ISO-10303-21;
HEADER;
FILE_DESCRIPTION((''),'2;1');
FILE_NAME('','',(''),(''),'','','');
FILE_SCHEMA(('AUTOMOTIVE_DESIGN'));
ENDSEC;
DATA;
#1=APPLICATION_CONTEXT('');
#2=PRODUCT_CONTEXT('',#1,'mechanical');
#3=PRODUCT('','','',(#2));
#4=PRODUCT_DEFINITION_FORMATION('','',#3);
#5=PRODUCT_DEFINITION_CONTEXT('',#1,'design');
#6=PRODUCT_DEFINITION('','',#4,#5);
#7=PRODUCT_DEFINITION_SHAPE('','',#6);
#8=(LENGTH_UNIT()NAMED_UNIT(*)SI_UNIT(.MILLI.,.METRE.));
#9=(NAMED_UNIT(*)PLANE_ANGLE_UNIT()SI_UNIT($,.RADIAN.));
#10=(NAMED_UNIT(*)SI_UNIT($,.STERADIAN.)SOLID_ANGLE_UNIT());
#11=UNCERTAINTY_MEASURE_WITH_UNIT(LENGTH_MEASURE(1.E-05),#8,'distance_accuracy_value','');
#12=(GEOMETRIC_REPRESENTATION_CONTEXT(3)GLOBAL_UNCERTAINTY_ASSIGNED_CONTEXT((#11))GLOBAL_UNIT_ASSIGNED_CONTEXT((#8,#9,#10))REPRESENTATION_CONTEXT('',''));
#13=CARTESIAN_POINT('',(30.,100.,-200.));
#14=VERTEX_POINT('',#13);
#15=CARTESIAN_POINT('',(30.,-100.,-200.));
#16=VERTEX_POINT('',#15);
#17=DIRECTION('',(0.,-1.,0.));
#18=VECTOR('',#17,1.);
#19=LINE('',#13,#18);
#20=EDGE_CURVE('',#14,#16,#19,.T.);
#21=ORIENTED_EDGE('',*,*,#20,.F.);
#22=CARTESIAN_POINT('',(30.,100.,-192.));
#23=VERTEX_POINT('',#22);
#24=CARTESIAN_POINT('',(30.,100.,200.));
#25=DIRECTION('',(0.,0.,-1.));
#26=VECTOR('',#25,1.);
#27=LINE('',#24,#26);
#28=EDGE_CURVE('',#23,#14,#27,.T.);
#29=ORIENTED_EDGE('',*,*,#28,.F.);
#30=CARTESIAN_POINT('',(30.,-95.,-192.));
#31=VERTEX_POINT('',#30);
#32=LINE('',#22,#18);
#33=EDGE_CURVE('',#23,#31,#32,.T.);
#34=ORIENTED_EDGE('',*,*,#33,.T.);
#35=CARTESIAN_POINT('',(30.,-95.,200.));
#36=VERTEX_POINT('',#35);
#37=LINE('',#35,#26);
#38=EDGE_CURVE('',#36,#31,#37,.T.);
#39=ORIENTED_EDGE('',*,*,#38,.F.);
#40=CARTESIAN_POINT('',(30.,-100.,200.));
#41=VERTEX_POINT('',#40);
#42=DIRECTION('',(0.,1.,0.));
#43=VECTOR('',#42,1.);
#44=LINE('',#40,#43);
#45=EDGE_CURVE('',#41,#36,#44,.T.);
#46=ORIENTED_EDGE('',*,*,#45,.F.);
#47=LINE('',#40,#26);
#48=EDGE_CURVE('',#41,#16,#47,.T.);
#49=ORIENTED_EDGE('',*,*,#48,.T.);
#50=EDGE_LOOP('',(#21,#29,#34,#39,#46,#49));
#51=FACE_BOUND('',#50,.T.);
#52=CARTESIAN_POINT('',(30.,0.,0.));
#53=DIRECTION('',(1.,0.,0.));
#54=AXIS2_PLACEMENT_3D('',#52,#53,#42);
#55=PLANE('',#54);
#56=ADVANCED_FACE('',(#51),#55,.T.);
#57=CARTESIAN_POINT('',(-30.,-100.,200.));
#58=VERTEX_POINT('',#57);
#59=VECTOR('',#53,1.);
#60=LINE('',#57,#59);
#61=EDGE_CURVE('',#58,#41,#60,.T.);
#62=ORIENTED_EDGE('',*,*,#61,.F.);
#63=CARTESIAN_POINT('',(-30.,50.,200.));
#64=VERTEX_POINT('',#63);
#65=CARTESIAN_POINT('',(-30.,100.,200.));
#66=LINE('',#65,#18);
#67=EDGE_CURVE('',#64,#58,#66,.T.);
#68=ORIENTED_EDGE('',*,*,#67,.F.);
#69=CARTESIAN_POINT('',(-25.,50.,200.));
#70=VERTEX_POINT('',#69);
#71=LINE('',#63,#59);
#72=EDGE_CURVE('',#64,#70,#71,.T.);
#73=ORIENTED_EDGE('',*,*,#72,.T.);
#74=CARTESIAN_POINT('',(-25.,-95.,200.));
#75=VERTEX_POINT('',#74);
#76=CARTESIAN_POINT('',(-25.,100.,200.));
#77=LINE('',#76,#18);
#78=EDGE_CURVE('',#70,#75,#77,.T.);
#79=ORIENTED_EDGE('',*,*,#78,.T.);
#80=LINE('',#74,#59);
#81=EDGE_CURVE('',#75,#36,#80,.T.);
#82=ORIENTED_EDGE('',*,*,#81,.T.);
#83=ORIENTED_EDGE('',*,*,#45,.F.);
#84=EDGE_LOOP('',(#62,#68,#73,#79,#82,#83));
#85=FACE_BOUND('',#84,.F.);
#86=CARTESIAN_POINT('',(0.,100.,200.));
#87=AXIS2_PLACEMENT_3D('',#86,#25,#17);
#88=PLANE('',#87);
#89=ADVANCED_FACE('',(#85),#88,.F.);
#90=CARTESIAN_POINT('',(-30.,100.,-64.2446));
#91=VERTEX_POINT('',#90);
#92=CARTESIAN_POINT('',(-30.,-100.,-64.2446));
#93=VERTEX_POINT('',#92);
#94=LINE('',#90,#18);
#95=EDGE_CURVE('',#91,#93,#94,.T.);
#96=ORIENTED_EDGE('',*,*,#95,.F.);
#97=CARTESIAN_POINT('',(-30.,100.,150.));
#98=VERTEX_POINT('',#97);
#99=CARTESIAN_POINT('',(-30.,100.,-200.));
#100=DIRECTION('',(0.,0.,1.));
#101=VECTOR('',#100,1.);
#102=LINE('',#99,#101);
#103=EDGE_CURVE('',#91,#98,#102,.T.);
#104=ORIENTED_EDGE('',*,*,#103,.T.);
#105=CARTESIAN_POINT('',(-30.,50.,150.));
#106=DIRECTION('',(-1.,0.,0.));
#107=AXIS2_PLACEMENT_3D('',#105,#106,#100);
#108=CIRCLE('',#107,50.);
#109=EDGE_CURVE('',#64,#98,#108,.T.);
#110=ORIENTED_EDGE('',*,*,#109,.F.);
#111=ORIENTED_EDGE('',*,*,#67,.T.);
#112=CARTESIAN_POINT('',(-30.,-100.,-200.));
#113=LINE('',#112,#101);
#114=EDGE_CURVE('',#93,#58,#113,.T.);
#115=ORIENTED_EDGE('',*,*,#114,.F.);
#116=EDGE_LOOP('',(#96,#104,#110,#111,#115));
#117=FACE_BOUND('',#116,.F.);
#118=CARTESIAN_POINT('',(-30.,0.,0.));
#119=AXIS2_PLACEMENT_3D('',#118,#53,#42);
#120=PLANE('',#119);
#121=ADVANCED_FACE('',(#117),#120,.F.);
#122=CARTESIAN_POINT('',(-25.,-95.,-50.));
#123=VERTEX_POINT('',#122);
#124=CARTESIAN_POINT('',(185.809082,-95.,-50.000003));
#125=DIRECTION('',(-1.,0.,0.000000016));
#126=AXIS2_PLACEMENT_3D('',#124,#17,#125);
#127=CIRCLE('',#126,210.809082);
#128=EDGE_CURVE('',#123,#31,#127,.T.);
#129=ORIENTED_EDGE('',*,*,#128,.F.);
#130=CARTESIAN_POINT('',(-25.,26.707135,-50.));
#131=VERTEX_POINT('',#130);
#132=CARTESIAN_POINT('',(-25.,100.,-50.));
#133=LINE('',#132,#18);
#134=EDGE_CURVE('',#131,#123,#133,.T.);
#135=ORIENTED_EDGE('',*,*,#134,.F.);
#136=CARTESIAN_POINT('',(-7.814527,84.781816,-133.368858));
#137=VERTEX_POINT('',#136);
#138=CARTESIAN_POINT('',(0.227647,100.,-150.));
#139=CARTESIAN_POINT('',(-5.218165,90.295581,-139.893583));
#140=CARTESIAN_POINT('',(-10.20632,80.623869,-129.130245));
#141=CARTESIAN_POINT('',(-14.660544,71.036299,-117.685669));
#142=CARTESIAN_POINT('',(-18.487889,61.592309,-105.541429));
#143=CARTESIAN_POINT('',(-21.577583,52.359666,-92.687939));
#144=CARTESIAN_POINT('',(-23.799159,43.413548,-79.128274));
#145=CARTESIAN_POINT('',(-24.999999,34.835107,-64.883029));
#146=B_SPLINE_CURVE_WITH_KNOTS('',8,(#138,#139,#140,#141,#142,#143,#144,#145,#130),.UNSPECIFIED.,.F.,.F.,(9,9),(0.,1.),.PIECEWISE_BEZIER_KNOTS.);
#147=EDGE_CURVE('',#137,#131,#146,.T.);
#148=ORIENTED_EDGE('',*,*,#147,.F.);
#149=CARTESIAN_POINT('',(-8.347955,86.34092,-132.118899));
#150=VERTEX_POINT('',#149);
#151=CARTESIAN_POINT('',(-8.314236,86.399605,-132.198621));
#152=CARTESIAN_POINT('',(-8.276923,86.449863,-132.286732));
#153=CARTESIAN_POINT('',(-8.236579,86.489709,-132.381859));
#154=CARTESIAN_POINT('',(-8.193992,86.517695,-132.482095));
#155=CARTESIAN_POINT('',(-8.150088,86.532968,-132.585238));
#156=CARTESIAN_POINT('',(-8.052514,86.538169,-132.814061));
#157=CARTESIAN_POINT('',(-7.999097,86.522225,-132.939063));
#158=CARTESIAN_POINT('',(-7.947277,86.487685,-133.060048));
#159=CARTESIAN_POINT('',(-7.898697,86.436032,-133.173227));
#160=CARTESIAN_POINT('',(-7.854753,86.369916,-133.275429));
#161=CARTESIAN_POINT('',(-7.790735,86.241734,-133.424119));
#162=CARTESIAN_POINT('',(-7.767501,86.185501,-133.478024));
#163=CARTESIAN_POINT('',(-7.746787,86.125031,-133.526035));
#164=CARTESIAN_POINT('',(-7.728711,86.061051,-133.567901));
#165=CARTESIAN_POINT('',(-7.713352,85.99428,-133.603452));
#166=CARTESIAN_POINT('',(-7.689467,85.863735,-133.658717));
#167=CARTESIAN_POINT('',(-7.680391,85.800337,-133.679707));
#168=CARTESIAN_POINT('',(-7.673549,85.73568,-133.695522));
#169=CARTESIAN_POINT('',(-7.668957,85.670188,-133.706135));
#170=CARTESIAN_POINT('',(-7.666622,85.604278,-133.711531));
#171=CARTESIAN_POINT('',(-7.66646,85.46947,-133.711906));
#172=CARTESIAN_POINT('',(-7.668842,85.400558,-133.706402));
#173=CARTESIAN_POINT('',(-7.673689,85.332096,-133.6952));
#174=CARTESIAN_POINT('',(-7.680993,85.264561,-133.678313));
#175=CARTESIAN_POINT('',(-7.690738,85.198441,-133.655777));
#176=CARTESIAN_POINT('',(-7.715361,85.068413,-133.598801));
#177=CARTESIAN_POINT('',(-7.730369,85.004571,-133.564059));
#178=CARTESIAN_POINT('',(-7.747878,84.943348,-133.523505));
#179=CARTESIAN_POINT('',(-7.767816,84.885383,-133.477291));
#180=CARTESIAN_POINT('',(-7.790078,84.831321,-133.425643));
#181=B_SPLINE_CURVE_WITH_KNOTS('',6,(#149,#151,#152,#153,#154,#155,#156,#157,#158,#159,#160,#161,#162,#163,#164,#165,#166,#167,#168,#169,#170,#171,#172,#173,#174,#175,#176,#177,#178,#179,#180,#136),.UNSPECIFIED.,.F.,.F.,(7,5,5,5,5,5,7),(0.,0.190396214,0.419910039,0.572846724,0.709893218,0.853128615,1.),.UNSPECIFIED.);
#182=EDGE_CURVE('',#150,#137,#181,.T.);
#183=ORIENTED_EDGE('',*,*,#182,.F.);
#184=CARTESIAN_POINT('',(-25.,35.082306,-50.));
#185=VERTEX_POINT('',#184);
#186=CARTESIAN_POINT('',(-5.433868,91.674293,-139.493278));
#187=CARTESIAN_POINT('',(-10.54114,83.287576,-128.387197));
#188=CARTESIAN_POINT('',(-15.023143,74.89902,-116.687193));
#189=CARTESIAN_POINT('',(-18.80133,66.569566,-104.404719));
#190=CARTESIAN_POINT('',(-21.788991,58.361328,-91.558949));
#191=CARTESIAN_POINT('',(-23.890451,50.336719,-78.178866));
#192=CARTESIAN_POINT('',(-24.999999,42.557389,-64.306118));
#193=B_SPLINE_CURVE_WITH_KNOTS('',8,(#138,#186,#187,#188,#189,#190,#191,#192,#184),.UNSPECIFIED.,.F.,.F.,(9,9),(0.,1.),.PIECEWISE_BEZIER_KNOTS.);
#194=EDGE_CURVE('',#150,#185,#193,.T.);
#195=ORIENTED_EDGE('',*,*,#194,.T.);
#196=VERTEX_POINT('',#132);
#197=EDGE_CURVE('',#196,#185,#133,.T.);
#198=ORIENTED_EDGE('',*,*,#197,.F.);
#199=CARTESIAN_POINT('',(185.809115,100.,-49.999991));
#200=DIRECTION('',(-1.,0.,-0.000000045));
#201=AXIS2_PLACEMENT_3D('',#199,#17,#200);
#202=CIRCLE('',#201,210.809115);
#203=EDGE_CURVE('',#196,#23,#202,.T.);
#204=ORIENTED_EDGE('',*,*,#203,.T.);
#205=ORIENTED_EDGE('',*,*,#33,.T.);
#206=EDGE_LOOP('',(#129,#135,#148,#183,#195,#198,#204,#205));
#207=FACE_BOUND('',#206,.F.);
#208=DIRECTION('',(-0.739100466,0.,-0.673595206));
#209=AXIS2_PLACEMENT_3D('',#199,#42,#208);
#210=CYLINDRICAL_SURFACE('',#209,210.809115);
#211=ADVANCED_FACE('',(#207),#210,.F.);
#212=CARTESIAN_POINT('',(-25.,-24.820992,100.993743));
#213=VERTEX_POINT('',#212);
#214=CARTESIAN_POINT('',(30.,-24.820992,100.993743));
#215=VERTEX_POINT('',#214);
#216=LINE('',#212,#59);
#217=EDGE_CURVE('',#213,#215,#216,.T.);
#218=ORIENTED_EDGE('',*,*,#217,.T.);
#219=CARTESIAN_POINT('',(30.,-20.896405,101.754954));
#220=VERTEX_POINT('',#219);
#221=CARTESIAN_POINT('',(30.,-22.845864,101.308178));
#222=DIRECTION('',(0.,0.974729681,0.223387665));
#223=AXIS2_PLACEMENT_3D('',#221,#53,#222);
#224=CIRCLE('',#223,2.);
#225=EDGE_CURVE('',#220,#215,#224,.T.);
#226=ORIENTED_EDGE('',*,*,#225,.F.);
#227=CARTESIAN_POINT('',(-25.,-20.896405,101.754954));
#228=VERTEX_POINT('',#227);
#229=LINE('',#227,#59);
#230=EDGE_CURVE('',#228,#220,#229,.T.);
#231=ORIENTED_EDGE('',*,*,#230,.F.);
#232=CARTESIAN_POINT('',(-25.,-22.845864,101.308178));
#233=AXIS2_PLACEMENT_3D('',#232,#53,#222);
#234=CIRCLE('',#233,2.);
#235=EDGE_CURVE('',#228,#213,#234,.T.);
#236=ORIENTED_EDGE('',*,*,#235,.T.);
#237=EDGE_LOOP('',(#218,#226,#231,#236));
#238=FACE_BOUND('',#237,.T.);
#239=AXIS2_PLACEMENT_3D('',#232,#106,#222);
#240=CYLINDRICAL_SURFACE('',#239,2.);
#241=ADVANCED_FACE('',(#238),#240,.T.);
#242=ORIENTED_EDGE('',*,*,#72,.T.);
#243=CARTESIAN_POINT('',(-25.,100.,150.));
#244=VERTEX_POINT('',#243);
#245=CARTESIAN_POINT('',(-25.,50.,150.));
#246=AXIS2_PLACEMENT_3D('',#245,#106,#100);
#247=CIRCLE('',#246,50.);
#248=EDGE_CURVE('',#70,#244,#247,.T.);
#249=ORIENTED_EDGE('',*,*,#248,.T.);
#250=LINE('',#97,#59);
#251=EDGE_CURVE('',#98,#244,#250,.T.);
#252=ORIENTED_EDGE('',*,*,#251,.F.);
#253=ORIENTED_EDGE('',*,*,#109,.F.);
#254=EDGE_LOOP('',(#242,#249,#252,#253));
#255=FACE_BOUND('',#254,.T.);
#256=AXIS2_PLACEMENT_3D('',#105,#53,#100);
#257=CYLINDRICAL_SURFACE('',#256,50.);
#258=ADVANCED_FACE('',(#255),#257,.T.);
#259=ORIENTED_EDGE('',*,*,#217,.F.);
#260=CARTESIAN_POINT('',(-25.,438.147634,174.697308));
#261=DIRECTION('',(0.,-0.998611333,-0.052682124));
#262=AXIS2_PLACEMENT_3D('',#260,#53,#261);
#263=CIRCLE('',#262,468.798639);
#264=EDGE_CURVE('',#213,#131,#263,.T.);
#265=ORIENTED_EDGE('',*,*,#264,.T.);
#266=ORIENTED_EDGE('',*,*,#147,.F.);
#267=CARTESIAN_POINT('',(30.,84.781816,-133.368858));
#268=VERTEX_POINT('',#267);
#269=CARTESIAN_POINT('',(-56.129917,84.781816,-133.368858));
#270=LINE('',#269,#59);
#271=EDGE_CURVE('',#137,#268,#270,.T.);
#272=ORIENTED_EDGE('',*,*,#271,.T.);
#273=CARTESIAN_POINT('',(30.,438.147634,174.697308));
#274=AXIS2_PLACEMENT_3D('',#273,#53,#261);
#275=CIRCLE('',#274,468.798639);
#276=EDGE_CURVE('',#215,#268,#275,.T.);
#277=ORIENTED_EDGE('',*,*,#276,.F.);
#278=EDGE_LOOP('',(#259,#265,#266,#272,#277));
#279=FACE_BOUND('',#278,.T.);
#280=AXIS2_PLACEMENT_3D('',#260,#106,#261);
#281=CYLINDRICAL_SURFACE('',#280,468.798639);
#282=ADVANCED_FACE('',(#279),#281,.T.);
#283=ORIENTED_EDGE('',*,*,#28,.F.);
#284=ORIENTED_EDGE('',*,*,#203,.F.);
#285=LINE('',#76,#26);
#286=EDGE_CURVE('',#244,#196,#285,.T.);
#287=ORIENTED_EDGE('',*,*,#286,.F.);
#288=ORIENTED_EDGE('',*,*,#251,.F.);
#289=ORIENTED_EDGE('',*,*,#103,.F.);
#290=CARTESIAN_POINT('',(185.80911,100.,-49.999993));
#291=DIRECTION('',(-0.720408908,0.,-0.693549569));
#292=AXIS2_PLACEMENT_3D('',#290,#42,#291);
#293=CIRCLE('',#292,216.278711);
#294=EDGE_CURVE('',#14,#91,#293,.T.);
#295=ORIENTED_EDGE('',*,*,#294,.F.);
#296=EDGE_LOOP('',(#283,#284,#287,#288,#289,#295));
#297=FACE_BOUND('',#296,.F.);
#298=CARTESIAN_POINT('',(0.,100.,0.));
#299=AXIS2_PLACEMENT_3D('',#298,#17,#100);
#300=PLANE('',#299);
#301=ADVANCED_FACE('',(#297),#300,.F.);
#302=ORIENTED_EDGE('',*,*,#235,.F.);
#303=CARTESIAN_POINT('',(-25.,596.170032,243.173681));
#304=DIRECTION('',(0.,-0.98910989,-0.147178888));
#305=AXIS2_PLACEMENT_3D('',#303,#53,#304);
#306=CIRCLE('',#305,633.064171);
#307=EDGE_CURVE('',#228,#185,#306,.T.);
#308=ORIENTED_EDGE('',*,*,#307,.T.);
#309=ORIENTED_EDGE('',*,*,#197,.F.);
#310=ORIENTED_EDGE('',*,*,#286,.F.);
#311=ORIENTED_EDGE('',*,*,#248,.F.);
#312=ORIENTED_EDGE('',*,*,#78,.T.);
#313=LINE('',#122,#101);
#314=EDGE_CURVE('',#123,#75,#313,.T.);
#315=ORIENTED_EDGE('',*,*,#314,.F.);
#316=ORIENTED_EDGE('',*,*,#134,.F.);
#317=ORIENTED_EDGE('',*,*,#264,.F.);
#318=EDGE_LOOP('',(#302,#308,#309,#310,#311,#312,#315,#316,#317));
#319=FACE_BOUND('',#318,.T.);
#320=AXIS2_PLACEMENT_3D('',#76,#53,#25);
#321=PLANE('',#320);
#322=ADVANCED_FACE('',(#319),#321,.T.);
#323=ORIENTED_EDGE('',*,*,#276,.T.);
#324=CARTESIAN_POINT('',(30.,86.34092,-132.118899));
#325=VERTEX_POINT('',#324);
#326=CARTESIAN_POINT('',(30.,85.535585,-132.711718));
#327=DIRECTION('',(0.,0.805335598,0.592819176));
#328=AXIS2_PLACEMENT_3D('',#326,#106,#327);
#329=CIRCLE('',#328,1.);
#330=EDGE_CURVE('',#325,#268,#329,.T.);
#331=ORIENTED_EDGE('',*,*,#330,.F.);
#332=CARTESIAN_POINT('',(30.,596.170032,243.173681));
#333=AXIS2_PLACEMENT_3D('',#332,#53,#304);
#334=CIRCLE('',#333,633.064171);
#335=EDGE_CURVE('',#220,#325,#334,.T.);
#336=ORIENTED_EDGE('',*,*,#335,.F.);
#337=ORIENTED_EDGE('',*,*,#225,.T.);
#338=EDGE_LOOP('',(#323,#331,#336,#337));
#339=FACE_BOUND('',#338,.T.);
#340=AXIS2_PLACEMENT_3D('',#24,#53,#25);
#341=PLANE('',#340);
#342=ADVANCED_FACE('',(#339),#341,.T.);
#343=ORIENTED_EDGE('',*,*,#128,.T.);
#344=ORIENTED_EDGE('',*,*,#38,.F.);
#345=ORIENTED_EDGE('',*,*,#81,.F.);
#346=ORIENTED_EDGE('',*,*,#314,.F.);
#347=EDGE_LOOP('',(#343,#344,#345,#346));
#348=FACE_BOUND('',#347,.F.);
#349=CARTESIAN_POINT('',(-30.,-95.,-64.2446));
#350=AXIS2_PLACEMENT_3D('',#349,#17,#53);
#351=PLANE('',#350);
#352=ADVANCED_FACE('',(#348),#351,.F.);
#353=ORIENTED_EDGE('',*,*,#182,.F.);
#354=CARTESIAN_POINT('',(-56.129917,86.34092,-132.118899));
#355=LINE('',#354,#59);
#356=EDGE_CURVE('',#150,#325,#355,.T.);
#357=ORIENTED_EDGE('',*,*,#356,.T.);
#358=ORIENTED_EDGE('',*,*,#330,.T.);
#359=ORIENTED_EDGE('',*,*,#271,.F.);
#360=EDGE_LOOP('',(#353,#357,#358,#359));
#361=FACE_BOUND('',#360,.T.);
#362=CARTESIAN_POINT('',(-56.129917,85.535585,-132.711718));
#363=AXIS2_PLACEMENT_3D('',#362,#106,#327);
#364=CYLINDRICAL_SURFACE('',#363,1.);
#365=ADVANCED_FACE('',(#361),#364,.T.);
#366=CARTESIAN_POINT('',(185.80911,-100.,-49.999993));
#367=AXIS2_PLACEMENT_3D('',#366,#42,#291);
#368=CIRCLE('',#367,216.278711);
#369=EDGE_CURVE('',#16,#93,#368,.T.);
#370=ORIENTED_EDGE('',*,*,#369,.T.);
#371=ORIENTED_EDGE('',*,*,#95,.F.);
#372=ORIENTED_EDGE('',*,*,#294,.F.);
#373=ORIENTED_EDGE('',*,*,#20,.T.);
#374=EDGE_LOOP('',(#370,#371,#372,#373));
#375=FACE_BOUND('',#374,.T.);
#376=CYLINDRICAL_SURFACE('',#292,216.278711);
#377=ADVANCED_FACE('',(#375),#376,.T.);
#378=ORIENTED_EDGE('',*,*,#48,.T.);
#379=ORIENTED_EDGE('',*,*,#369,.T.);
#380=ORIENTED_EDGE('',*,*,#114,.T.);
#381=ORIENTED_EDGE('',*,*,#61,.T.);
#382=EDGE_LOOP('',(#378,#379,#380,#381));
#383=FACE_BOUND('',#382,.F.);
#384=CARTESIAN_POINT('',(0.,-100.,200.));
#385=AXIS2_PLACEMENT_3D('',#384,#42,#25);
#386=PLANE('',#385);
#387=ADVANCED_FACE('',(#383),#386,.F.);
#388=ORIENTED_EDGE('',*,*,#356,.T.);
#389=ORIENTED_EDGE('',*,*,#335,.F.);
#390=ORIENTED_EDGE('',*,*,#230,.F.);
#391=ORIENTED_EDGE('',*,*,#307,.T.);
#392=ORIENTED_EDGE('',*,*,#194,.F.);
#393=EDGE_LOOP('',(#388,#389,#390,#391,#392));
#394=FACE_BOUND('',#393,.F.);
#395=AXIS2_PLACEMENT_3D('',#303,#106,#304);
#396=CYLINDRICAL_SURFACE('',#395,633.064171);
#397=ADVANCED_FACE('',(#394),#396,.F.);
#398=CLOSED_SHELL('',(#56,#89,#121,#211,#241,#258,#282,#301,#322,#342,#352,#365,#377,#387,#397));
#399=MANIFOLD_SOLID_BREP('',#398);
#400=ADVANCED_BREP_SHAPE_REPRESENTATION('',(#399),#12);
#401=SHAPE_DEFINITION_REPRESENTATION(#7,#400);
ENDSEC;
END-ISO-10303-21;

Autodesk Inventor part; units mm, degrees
ref_plane "YZ Plane" through (0, 0, 0) normal (1, 0, 0) x (0, 1, 0)
ref_plane "XZ Plane" through (0, 0, 0) normal (0, 1, 0) x (-1, 0, 0)
ref_plane "XY Plane" through (0, 0, 0) normal (0, 0, 1) x (1, 0, 0)
sketch "スケッチ1" plane through (0, 0, 0) normal (1, 0, 0) x (0, 1, 0)
  line L0 (100, 200) -> (-100, 200)
  line L1 (-100, 200) -> (-100, -200)
  line L2 (-100, -200) -> (100, -200)
  line L3 (100, -200) -> (100, 200)
  line L4 (-140, 0) -> (140, 0) projected
  line L5 (0, -280) -> (0, 280) projected
  point P0 (0, 0)
  point P1 (100, 0)
  point P2 (0, 200)
  dimension "d2" = 200
  dimension "d3" = 400
extrude "押し出し1" add sketch "スケッチ1" along normal mid plane 60
sketch "スケッチ3" plane through (-30, 100, 200) normal (0, 1, 0) x (1, 0, 0)
  line L0 (0, 0) -> (60, 0) projected
  line L1 (60, 0) -> (5, 0)
  line L2 (60, 392) -> (60, 0)
  line L3 (60, 400) -> (60, 0) projected
  line L4 (5, 0) -> (5, 250)
  arc A0 (60, 392) -> (5, 250) centre (215.8091, 250) ccw
  line L5 (0, 0) -> (0, 400) projected
  line L6 (0, 400) -> (60, 400) projected
  arc A1 (60, 400) -> (0, 264.2446) centre (215.8091, 250) ccw
  dimension "d16" = 5
  dimension "d18" = 250
  dimension "d21" = 8
extrude "押し出し2" cut sketch "スケッチ3" against normal through all contours L4 A0 L2 L0 | L5 L6 A1
sketch "スケッチ7" plane through (-25, 100, 200) normal (1, 0, 0) x (0, 0, -1)
  arc A0 (50, -130) -> (350, 0) centre (-43.1737, 496.1701) ccw
  arc A1 (50, -130) -> (350, 0) centre (25.3027, 338.1476) ccw
  line L0 (50, -130) -> (350, 0)
  line L1 (0, -200) -> (0, 0) projected
  line L2 (0, 0) -> (250, 0) projected
  line L3 (400, -200) -> (400, 0) projected
  dimension "d30" = 50
  dimension "d31" = 130
  dimension "d38" = 50
extrude "押し出し5" add sketch "スケッチ7" along normal blind 55 contours A0 A1
sketch "スケッチ8" plane through (0, 0, 0) normal (0, 1, 0) x (-1, 0, 0)
  line L0 (-30, -200) -> (-30, -192) projected
  line L1 (-30, -200) -> (30, -200)
  line L2 (30, 200) -> (30, -64.2446) projected
  arc A0 (-30, -200) -> (30, -64.2446) centre (-185.8091, -50) ccw projected
  arc A1 (-30, -200) -> (-30, -200) centre (-53.5814, -108.4409) ccw
  line L3 (30, -200) -> (30, -64.2446)
  point P0 (0, 0)
extrude "押し出し6" cut sketch "スケッチ8" along normal through all contours A1 L3 L1 | A0 L3 A1
fillet "フィレット2" radius 1 1 edges at (15.1138, 100, -150)
fillet "フィレット2" radius 2 1 edges at (2.5, -30, 150)
sketch "スケッチ10" plane through (-30, -100, -64.2446) normal (0, -1, 0) x (1, 0, 0)
  line L0 (0, 264.2446) -> (5, 264.2446) projected
  line L1 (5, 264.2446) -> (60, 264.2446)
  arc A0 (5, 14.2446) -> (60, -127.7554) centre (215.8091, 14.2446) ccw projected
  line L2 (60, 264.2446) -> (60, -127.7554)
  line L3 (5, 14.2446) -> (5, 264.2446) projected
  line L4 (5, 264.2446) -> (5, 14.2446)
  line L5 (0, 264.2446) -> (0, 0) projected
  point P0 (30, 64.2446)
extrude "押し出し7" add sketch "スケッチ10" against normal blind 5
fillet "フィレット3" radius 50 1 edges at (-27.5, 100, 200)
properties part number "type8_end_plate" material "CFRP"
